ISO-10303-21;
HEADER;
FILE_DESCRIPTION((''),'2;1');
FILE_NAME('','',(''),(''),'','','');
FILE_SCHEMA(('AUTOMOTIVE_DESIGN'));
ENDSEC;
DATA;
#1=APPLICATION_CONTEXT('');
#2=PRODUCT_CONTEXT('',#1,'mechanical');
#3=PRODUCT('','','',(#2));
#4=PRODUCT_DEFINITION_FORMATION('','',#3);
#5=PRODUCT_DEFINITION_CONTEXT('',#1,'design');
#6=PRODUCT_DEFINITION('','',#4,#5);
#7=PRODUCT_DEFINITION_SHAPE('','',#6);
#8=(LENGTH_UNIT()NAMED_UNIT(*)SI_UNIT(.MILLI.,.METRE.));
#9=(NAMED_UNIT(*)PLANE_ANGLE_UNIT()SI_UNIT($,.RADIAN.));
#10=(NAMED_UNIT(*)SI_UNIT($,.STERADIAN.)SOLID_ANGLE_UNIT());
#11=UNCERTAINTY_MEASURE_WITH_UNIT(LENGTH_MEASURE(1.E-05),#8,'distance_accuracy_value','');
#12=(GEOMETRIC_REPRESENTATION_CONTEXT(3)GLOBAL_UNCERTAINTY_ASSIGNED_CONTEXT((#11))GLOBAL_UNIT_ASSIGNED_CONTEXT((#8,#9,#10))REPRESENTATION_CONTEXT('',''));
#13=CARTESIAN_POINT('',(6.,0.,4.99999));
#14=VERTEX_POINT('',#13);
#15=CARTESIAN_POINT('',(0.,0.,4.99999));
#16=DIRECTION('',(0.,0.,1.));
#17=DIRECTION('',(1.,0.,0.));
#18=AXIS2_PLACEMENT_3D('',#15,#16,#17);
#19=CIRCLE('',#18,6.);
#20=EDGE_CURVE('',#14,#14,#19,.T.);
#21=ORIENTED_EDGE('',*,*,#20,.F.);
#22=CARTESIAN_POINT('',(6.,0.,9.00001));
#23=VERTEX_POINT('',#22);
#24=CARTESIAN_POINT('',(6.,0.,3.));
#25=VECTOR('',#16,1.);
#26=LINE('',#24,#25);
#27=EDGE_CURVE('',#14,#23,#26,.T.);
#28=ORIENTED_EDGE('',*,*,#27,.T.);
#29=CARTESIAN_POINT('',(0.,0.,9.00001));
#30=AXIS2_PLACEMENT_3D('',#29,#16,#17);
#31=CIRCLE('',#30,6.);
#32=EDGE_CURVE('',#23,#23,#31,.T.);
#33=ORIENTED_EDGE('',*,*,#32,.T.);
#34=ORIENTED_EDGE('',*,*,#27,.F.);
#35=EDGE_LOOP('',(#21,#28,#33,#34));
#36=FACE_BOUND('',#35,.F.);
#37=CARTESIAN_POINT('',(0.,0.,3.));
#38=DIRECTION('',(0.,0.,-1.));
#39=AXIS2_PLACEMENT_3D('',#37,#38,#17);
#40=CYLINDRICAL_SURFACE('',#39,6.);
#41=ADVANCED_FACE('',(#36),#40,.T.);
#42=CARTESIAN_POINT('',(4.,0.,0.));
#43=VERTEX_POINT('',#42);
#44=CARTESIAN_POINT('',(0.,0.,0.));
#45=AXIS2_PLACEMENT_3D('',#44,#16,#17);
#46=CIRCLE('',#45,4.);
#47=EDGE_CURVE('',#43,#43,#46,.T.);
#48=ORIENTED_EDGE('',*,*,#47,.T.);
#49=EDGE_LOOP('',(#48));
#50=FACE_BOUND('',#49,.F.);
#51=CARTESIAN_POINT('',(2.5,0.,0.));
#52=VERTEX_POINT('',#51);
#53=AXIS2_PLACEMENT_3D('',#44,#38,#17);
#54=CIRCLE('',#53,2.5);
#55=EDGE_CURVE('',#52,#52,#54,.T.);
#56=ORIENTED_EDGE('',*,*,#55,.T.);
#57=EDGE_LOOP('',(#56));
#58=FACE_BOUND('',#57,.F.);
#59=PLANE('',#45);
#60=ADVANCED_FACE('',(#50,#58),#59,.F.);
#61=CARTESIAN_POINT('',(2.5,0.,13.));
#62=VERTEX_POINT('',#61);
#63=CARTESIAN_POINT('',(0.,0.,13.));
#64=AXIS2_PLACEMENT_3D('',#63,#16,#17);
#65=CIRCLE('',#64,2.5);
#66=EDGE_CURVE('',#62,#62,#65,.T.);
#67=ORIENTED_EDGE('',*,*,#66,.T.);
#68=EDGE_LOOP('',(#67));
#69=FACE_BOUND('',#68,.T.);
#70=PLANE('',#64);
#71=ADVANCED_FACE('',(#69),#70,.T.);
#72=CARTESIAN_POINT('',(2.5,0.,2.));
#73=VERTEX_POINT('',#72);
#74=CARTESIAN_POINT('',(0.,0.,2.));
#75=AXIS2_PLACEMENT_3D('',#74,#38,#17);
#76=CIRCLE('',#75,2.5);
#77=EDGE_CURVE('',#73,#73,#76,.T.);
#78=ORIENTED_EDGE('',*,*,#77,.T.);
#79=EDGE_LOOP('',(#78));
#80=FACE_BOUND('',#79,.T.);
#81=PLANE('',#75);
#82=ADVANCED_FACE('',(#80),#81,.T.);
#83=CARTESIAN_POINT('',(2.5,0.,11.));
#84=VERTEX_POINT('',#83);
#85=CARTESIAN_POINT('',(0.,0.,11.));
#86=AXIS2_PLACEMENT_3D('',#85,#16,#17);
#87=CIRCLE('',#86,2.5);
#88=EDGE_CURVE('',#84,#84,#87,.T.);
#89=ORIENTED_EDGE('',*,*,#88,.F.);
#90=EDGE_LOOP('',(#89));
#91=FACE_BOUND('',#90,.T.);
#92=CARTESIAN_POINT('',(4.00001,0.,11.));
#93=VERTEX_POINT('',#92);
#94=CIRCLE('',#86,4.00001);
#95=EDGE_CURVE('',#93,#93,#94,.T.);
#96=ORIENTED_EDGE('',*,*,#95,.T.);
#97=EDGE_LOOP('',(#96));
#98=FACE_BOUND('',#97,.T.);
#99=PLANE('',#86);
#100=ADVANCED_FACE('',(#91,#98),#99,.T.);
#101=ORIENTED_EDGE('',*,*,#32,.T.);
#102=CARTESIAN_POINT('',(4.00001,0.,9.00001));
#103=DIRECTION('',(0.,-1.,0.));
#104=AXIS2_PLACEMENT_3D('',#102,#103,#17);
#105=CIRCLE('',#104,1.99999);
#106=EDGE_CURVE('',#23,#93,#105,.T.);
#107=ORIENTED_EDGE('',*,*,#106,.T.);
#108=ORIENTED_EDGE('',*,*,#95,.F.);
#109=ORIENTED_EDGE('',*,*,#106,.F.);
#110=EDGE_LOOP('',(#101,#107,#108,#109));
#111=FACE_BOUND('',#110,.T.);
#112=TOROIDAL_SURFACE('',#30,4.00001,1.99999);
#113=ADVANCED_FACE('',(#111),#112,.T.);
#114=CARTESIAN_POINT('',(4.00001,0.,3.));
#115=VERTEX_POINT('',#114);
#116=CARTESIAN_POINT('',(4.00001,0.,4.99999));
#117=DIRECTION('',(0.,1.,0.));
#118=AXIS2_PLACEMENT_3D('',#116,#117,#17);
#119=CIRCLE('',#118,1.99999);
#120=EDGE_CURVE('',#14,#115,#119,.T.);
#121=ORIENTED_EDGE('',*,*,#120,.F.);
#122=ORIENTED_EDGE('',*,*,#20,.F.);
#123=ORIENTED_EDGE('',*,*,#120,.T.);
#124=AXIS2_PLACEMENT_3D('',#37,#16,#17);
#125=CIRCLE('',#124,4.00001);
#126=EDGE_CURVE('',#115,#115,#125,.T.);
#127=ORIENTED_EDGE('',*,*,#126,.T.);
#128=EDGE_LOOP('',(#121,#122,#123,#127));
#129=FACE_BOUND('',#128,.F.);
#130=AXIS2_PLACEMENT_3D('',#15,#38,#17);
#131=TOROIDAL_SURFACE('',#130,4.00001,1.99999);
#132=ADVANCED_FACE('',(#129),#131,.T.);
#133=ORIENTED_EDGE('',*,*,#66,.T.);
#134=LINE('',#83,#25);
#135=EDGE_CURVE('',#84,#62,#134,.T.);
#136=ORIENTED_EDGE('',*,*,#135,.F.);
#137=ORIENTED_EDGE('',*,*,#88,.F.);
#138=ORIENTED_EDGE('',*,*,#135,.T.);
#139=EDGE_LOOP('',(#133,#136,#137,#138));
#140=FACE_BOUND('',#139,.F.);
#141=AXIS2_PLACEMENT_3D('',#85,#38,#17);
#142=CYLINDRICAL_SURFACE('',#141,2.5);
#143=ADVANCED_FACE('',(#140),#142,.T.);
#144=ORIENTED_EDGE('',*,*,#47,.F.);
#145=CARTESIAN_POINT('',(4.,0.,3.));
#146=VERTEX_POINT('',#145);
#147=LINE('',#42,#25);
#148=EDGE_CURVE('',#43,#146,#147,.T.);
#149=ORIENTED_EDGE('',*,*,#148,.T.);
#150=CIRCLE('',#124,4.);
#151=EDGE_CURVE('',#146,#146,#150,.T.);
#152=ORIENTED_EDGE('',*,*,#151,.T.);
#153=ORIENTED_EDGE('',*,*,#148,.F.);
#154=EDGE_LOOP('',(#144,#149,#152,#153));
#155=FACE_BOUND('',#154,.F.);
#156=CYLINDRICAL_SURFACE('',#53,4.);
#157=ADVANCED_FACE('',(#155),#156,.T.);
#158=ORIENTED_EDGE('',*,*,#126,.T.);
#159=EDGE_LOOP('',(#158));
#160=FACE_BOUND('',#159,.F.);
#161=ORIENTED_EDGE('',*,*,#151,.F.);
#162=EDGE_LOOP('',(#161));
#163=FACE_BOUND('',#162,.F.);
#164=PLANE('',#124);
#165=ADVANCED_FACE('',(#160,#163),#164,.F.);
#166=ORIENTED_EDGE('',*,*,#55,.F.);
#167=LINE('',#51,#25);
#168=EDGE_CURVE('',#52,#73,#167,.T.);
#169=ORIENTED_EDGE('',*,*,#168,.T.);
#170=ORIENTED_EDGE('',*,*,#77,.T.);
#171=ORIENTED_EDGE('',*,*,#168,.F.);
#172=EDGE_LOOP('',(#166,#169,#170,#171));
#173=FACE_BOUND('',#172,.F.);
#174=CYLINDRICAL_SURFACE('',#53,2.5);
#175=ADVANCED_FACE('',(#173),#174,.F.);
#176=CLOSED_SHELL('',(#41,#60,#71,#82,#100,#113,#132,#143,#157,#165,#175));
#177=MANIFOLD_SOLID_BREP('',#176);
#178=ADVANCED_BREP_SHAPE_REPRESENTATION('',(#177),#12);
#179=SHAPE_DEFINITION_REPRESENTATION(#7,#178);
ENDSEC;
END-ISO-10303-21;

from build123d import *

# Parameters (mm, degrees)
F0_R     = 4
F1_DEPTH = 3
F2_R     = 6
F3_DEPTH = 8
F4_R     = 2.5
F5_DEPTH = 2
F6_R     = 1.99999
F7_R     = 2.5
F8_DEPTH = 2


# Not quite as in the source:
# - a fillet or chamfer is up to 0.001 mm smaller than in the source, because OpenCascade refuses the exact size


with BuildPart() as f1:
    # F0 (on Top) → F1 (new body)
    with BuildSketch(Plane.XY):
        Circle(F0_R)
    extrude(amount=F1_DEPTH)

    # F2 (on face) → F3 (join)
    with BuildSketch(Plane.XY.offset(3)):
        Circle(F2_R)
    extrude(amount=F3_DEPTH)

    # F4 (on face) → F5 (join)
    with BuildSketch(Plane.XY.offset(11)):
        Circle(F4_R)
    extrude(amount=F5_DEPTH)

    # F6 (radius 2 in the source; OpenCascade refuses exactly that, so slightly less here)
    f6_edges = [f1.edges().sort_by_distance(p)[0] for p in [
        (-6, 0, 11),
        (-6, 0, 3),
    ]]
    fillet(f6_edges, radius=F6_R)

    # F7 (on face) → F8 (cut)
    with BuildSketch(Plane(origin=(0, 0, 0), x_dir=(1, 0, 0), z_dir=(0, 0, -1))):
        Circle(F7_R)
    extrude(amount=-F8_DEPTH, mode=Mode.SUBTRACT)


solid = f1.part
